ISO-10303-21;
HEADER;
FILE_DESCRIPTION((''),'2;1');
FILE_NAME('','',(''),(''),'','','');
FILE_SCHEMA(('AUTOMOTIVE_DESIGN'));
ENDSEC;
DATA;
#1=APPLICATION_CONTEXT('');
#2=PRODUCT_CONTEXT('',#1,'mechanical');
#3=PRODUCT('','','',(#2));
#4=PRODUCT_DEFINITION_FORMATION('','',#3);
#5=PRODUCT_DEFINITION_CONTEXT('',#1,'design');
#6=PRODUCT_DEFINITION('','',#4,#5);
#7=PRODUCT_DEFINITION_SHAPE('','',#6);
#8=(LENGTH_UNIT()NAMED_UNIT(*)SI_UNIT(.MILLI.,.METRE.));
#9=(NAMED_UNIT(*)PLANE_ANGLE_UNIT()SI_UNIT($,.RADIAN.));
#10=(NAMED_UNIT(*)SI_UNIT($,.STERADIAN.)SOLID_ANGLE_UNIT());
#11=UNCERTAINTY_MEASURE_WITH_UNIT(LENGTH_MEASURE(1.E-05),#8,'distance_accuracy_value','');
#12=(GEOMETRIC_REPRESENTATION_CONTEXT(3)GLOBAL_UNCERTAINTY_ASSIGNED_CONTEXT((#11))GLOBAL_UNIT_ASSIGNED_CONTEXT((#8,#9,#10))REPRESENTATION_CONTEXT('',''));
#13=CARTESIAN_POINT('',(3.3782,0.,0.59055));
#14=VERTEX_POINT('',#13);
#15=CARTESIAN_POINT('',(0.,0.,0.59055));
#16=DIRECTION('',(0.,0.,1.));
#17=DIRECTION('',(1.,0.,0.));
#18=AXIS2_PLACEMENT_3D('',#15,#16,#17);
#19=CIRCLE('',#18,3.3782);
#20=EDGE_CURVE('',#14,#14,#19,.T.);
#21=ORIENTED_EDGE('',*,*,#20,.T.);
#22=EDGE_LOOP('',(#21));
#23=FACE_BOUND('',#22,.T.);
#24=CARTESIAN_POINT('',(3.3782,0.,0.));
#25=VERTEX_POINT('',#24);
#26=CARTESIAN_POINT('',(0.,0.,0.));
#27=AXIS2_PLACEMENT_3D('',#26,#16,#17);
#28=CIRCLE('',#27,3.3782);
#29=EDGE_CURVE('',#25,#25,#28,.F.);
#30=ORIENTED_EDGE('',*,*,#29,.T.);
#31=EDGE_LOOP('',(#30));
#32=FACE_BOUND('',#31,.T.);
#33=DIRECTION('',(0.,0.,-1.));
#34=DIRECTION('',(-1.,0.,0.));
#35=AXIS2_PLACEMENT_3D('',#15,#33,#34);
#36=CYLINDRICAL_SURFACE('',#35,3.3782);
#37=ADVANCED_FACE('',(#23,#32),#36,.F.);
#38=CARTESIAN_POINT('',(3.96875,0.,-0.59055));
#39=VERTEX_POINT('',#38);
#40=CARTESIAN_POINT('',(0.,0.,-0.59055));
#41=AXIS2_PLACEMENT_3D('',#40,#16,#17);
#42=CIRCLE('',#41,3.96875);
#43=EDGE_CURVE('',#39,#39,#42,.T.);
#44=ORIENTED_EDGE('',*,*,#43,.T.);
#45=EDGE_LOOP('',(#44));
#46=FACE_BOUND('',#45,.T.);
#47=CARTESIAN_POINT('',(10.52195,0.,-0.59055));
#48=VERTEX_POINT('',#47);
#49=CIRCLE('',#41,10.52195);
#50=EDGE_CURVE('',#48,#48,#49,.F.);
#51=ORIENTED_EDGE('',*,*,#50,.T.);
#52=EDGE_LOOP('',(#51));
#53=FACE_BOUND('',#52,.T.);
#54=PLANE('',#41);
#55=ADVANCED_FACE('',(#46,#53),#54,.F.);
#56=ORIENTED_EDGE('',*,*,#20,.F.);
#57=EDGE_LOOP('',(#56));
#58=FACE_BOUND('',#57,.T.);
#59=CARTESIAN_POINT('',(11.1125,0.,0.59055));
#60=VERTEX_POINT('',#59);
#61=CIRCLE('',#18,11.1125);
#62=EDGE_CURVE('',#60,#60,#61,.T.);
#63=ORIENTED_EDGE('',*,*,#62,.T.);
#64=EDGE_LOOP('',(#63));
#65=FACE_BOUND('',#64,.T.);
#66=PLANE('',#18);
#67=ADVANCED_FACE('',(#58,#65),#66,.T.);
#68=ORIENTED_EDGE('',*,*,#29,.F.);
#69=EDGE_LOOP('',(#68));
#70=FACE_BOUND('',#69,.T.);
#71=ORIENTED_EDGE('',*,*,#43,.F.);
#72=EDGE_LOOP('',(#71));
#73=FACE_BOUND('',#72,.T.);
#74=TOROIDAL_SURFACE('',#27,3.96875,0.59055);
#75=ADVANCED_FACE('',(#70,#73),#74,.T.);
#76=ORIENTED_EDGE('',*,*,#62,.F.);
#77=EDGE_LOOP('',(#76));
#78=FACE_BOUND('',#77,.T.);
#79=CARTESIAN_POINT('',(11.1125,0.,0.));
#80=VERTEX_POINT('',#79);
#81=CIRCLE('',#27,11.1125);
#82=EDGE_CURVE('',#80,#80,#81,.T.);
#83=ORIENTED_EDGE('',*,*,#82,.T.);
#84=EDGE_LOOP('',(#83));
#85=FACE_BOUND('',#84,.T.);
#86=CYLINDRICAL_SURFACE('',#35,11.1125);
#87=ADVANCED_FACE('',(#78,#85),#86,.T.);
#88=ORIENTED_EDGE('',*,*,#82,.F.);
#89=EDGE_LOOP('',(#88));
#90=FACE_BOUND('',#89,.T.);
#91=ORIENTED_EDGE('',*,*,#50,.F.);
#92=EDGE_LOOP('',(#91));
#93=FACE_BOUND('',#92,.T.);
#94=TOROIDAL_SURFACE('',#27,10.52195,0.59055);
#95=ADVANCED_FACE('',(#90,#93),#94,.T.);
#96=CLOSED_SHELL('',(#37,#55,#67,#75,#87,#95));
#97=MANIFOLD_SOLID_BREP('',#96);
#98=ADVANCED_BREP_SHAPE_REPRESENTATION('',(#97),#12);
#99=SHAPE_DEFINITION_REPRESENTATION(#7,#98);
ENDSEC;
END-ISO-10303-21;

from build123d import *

# Parameters (mm, degrees)
BOSS_EXTRUDE1_DEPTH      = 0.59055
BOSS_EXTRUDE1_DEPTH_BACK = 0.59055
SKETCH3_R                = 11.1125
SKETCH3_R_2              = 3.3782
FILLET1_R                = 0.59055


with BuildPart() as part:
    # Sketch3 → Boss-Extrude1 (new, two sides: drawn at the far end of the back side and taken through both)
    with BuildSketch(Plane.XY.offset(-BOSS_EXTRUDE1_DEPTH_BACK)):
        Circle(SKETCH3_R)
        Circle(SKETCH3_R_2, mode=Mode.SUBTRACT)
    extrude(amount=BOSS_EXTRUDE1_DEPTH + BOSS_EXTRUDE1_DEPTH_BACK)

    # Fillet1
    fillet1_edges = [part.edges().sort_by_distance(p)[0] for p in [
        (-11.1125, 0, -0.59055),
        (-3.3782, 0, -0.59055),
    ]]
    fillet(fillet1_edges, radius=FILLET1_R - 0.0001)  # a hair under: the kernel refuses the full size


solid = part.part
